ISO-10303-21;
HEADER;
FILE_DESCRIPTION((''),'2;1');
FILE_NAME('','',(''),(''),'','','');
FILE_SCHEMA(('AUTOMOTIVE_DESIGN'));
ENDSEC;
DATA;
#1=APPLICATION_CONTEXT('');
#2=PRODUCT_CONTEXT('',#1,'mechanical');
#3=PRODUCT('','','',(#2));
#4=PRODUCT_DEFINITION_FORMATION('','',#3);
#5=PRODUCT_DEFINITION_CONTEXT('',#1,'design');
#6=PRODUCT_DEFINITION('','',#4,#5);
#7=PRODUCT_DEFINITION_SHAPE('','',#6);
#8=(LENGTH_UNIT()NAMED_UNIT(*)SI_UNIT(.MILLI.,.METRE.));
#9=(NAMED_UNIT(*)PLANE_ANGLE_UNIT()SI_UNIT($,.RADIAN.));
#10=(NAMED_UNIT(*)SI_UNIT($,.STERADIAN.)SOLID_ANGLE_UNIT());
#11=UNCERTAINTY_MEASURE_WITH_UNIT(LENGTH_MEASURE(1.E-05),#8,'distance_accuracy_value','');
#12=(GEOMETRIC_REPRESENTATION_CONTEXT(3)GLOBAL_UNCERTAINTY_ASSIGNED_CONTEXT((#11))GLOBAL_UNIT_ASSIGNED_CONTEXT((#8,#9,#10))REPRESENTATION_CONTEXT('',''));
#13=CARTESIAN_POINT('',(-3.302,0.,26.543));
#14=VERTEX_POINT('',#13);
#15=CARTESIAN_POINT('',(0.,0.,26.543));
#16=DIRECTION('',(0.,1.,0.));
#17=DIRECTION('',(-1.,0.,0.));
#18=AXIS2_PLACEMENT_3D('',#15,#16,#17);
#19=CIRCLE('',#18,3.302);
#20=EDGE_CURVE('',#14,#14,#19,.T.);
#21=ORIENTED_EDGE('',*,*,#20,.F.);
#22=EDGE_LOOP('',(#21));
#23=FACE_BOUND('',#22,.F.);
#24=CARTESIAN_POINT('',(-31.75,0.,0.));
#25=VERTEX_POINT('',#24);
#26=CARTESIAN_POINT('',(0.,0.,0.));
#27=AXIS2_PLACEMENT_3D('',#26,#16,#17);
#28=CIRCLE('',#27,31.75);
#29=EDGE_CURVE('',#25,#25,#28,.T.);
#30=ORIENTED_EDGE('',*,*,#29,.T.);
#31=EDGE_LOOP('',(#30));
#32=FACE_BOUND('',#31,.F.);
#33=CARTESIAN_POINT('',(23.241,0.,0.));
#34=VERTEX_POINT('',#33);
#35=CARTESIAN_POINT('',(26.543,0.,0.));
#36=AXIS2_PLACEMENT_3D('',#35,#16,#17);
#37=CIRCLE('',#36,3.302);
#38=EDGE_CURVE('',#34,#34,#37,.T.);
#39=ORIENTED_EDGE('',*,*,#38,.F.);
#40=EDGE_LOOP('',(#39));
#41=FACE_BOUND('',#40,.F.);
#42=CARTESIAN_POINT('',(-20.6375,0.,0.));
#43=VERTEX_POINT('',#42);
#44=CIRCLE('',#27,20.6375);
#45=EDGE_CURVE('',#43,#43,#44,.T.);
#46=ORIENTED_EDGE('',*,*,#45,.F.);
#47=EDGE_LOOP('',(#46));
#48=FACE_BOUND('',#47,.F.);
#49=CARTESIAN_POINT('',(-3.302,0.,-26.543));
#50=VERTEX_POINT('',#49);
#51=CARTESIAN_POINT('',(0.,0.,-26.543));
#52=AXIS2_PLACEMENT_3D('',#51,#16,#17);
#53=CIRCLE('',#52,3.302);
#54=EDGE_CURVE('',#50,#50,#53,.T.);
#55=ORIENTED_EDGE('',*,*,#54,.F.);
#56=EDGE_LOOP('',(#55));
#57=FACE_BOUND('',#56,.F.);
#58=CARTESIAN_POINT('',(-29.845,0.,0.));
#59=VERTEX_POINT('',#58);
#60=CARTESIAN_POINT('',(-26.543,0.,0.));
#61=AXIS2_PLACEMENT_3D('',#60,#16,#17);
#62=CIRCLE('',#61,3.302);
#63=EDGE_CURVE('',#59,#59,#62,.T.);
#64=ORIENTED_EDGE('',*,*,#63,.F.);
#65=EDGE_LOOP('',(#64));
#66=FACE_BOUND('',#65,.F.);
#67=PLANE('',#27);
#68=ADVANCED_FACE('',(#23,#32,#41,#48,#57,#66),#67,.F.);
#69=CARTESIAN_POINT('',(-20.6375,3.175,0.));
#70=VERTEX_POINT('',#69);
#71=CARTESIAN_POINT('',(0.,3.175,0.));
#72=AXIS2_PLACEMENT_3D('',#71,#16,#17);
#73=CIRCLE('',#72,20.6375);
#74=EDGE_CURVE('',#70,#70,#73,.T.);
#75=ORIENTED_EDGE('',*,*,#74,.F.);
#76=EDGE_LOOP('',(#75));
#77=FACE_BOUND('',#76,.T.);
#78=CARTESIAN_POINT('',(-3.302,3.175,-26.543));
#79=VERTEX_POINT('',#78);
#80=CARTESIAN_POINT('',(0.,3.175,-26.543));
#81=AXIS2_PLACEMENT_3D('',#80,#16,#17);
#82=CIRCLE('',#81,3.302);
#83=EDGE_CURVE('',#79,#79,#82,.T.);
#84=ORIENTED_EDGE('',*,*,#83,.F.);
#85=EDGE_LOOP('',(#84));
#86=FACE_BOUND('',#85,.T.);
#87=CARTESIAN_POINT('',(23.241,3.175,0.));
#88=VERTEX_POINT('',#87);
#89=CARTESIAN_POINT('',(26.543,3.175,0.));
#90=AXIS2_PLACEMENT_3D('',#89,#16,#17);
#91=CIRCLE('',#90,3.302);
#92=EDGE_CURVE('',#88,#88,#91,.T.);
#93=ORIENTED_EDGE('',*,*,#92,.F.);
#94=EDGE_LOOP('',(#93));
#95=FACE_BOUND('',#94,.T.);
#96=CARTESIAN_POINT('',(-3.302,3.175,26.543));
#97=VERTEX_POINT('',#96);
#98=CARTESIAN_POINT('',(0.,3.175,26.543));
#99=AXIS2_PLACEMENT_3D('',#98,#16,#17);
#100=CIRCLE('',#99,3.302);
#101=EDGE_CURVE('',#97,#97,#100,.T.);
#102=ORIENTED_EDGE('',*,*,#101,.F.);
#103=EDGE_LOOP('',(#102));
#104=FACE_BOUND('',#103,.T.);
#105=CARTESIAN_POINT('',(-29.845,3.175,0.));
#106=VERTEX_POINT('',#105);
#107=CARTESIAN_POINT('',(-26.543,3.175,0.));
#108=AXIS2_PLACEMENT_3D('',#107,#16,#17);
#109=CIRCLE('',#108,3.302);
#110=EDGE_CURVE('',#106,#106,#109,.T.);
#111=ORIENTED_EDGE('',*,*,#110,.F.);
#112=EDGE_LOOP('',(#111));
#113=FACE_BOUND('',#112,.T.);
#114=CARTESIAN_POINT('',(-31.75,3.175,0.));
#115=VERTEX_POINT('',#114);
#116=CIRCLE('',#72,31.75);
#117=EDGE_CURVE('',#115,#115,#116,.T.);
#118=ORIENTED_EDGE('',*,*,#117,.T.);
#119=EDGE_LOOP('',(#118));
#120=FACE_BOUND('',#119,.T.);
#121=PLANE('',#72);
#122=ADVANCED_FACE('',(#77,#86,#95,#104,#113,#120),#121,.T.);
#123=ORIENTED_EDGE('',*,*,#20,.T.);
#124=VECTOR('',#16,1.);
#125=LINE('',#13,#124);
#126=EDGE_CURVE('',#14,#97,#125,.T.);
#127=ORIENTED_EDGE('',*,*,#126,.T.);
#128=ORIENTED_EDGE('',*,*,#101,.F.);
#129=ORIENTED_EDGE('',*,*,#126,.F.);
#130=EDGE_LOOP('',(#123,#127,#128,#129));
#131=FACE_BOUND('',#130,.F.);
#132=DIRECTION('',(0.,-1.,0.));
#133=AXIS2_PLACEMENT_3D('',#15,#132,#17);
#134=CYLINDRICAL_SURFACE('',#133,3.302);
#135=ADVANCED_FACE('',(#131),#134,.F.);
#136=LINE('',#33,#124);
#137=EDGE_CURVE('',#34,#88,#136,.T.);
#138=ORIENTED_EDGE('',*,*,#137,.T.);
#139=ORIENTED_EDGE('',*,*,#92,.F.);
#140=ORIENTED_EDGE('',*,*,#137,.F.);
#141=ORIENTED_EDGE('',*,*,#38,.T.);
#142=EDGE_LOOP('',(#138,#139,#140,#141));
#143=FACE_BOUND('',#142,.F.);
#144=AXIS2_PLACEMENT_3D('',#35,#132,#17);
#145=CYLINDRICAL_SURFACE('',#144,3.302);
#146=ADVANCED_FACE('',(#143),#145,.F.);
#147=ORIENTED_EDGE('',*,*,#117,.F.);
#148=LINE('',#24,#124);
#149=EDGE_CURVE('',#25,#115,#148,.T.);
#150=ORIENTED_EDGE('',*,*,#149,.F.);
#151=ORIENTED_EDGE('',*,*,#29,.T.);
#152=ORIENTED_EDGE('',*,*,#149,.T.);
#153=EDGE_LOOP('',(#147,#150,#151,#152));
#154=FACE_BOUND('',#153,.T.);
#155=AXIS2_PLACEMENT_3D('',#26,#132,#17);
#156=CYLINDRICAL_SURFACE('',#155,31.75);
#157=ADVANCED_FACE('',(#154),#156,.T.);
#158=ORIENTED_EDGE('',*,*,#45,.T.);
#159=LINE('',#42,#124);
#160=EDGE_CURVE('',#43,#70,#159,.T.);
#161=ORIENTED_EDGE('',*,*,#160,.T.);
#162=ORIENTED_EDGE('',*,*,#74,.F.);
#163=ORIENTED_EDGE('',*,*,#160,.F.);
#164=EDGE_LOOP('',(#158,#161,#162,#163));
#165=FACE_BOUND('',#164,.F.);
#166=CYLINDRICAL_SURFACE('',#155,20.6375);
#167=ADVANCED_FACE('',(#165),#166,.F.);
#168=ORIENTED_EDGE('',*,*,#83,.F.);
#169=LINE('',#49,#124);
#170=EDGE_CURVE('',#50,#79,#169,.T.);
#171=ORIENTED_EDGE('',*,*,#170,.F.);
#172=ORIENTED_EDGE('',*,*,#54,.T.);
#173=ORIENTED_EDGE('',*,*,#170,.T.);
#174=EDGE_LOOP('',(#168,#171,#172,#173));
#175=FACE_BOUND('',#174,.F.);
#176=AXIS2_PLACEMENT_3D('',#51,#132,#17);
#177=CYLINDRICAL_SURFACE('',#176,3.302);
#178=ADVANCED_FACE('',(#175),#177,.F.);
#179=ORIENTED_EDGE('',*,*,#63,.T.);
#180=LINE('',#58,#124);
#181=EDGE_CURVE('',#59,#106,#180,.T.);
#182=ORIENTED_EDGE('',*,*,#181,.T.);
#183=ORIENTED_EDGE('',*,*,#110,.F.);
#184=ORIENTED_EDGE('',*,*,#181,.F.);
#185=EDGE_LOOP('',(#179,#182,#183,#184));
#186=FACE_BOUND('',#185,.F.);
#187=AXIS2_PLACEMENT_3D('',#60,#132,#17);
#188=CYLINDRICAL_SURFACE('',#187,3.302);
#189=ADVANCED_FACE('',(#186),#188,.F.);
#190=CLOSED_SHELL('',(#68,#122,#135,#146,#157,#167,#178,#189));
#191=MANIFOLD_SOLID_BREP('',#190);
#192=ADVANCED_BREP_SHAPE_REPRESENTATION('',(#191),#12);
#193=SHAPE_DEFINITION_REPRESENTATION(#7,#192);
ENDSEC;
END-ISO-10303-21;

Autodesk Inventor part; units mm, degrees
ref_plane "YZ Plane" through (0, 0, 0) normal (1, 0, 0) x (0, 1, 0)
ref_plane "XZ Plane" through (0, 0, 0) normal (0, 1, 0) x (-1, 0, 0)
ref_plane "XY Plane" through (0, 0, 0) normal (0, 0, 1) x (1, 0, 0)
sketch "Sketch1" plane through (0, 0, 0) normal (0, 1, 0) x (-1, 0, 0)
  circle A0 centre (0, 0) radius 26.543 construction
  circle A1 centre (0, 26.543) radius 3.302
  circle A2 centre (26.543, 0) radius 3.302
  circle A3 centre (-26.543, 0) radius 3.302
  circle A4 centre (0, -26.543) radius 3.302
  circle A5 centre (0, 0) radius 20.6375
  circle A6 centre (0, 0) radius 31.75
  dimension "d0" = 53.086
  dimension "d1" = 6.604
  dimension "d2" = 6.604
  dimension "d3" = 6.604
  dimension "d4" = 6.604
  dimension "d5" = 41.275
  dimension "d6" = 63.5
extrude "Plate1" add sketch "Sketch1" along normal blind 3.175
equation "\"BendRadius\" = Thickness"
equation "\"BendReliefWidth\" = Thickness"
equation "\"BendReliefDepth\" = 0.5 * Thickness"
equation "\"CornerReliefSize\" = 4 * Thickness"
equation "\"MinimumRemnant\" = 2 * Thickness"
equation "\"TransitionRadius\" = BendRadius"
equation "\"JacobiRadiusSize\" = BendRadius"
equation "\"GapSize\" = Thickness"
equation "\"d7\" = BendRadius"
equation "\"Thickness\" = 3.175"
properties part number "Hub 2"
